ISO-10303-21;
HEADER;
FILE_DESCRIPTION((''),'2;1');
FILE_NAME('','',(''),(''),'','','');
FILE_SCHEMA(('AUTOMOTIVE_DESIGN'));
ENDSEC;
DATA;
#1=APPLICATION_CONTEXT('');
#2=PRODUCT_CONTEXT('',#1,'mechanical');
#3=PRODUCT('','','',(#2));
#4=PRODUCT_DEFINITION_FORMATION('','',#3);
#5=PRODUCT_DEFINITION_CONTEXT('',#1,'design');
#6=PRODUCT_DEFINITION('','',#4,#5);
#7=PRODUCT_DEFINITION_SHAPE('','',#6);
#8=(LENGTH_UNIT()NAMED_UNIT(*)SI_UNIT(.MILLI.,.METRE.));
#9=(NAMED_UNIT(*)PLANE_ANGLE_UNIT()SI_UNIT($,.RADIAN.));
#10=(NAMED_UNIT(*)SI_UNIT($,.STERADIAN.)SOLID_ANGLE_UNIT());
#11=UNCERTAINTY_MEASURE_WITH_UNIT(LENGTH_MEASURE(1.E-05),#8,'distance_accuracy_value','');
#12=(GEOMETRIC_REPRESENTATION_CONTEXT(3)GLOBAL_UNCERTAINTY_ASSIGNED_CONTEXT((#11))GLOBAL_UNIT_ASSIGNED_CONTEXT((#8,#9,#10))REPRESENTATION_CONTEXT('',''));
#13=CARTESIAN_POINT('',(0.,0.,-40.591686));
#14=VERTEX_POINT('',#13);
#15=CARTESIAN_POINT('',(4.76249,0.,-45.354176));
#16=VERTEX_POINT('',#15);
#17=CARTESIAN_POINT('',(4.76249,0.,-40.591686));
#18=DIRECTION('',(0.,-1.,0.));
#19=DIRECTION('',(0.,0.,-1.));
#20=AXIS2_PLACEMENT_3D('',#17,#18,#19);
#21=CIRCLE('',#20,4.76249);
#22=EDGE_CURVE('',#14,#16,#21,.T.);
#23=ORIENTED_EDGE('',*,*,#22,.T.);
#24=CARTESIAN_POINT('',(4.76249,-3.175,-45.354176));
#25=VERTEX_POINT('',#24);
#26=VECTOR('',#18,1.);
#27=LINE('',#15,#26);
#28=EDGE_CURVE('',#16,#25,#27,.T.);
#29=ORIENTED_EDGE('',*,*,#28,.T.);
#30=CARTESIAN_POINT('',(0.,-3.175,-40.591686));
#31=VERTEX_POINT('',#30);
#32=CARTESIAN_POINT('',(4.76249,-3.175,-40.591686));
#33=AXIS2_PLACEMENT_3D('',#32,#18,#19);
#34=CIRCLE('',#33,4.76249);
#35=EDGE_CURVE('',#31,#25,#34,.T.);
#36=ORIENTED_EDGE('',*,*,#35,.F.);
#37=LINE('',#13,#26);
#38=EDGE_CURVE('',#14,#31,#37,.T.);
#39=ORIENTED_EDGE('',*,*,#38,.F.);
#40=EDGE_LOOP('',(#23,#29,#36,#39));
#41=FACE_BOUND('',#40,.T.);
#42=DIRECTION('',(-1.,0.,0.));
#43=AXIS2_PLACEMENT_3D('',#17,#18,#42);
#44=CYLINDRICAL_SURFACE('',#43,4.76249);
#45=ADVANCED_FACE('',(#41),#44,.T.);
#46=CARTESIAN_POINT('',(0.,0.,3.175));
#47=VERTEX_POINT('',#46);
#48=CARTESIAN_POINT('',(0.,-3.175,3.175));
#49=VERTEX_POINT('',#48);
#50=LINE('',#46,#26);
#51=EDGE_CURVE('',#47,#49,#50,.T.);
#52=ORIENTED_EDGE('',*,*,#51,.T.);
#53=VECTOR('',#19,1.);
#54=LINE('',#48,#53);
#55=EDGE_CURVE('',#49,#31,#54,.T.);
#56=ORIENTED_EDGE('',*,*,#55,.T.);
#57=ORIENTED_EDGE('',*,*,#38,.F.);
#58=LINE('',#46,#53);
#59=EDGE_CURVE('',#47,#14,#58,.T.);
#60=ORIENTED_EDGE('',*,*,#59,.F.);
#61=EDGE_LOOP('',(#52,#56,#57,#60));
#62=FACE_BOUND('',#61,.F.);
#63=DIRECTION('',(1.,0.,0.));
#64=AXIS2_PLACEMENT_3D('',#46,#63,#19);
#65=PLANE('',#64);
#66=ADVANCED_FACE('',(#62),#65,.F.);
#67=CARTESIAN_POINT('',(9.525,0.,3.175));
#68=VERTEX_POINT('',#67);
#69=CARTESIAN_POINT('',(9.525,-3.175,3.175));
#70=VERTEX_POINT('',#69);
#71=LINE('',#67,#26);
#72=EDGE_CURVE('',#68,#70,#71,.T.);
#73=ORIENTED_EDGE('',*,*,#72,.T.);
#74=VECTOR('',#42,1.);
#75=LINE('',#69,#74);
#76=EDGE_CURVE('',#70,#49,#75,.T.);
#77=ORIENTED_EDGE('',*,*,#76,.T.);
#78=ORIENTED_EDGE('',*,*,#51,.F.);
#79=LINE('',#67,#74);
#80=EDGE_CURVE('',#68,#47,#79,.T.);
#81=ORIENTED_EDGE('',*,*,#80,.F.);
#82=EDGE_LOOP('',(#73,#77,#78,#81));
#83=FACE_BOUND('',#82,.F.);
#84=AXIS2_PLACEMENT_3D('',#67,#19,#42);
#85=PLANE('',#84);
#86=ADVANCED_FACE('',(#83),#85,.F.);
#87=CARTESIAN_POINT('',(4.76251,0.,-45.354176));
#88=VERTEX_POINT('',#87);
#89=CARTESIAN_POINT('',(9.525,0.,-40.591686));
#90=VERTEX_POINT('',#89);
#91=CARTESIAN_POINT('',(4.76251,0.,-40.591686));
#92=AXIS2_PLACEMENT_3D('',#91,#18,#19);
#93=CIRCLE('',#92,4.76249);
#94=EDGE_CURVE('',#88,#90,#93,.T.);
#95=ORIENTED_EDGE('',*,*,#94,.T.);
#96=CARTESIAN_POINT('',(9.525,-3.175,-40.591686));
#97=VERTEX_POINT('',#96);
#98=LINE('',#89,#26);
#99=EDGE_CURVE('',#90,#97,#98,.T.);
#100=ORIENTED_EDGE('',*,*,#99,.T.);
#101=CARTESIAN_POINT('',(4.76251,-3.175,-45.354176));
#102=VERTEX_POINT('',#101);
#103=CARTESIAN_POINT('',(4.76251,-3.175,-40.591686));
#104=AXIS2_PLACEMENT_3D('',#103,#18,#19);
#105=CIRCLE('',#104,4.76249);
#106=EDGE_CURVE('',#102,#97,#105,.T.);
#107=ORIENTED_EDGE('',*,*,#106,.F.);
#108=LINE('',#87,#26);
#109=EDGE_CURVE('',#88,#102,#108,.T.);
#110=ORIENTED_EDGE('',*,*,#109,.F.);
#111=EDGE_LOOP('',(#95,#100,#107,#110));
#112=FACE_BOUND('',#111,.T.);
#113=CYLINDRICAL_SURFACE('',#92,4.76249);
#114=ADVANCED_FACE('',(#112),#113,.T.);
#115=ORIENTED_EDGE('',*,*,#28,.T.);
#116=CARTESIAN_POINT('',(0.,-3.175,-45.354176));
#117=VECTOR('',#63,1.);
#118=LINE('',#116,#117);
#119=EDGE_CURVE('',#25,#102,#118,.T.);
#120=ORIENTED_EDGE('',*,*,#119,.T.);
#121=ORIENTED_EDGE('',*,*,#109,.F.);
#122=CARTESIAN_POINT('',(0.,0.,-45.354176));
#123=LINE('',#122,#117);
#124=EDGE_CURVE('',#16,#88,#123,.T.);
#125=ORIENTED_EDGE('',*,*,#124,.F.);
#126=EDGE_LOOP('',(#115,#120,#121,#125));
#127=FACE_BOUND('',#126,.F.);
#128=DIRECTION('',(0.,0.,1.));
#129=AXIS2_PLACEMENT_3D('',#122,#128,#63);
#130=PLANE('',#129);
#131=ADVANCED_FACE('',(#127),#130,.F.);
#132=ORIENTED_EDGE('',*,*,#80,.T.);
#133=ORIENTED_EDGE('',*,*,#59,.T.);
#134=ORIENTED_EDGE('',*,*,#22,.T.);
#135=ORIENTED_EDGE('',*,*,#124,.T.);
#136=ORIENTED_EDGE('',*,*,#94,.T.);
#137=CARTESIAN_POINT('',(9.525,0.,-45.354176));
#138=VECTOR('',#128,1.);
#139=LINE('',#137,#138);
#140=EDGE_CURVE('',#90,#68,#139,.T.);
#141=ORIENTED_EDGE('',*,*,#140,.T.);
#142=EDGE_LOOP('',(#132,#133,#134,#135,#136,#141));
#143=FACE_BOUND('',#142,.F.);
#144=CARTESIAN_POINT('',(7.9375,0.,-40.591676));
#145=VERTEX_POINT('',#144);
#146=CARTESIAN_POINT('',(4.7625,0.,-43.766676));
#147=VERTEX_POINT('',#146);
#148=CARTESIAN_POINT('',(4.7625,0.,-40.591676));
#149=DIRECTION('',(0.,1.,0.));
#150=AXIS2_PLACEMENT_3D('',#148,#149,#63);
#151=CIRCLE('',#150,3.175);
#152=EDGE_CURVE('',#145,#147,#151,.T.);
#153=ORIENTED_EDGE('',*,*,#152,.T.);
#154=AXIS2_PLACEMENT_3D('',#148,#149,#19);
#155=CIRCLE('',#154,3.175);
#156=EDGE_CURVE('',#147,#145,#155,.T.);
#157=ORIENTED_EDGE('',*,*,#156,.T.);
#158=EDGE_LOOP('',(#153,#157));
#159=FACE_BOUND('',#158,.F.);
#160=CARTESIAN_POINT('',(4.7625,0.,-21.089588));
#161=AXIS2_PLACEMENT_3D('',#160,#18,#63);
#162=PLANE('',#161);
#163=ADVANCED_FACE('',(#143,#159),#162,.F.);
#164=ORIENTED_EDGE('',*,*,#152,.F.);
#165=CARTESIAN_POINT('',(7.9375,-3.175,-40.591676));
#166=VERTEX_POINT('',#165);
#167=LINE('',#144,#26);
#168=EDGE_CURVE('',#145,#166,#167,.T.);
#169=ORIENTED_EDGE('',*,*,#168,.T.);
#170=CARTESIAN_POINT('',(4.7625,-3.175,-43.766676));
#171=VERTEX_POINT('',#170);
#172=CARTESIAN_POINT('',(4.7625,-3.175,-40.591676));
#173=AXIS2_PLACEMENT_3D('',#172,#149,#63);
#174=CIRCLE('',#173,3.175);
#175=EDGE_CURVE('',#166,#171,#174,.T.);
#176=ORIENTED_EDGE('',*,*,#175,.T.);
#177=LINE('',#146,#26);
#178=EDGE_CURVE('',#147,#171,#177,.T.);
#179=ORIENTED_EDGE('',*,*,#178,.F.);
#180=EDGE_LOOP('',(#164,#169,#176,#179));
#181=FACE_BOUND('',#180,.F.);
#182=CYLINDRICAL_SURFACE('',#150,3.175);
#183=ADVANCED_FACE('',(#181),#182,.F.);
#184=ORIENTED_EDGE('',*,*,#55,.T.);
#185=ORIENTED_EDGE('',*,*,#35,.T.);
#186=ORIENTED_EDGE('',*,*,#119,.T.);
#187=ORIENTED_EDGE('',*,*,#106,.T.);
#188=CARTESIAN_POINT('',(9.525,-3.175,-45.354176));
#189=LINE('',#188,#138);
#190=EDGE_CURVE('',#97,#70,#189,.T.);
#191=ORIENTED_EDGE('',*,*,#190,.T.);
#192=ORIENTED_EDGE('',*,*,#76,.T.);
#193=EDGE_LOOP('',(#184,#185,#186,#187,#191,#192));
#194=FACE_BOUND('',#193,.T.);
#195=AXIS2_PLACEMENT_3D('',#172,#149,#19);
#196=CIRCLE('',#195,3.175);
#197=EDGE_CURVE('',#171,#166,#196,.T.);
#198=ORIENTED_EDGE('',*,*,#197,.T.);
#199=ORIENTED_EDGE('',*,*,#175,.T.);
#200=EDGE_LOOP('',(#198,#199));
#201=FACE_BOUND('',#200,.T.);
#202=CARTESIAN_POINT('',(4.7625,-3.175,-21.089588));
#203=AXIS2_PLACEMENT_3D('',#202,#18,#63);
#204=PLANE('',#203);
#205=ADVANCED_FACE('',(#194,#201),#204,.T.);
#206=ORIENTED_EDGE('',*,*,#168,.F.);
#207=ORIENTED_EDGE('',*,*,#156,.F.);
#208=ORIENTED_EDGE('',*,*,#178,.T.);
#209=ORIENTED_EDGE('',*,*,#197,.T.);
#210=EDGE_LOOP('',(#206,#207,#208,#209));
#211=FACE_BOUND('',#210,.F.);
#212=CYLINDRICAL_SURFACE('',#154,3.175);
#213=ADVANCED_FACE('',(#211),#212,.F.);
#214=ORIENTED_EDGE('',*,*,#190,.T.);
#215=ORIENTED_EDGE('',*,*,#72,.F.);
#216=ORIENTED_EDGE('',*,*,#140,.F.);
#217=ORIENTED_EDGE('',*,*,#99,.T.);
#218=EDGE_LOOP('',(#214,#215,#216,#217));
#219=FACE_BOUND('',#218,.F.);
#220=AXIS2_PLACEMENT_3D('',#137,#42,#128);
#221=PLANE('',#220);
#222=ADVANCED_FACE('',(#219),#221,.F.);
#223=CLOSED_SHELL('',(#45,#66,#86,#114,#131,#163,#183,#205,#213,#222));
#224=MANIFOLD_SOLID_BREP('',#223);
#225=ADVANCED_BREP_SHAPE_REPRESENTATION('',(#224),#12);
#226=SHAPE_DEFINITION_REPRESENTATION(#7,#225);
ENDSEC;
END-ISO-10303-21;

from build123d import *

# Parameters (mm, degrees)
F1_DEPTH = 3.175
F2_R     = 4.76249


# Not quite as in the source:
# - a fillet or chamfer is up to 0.001 mm smaller than in the source, because OpenCascade refuses the exact size


with BuildPart() as f1:
    # F0 (on Front) → F1 (new body)
    with BuildSketch(Plane.XZ):
        Polygon((0, 3.175), (0, 0), (0, -45.3541763127), (4.7625, -45.3541763127), (9.525, -45.3541763127), (9.525, 3.175), align=None)
        with BuildLine():
            ThreePointArc((7.9375, -40.5916763127), (7.0075640303, -42.836740343), (4.7625, -43.7666763127))
            ThreePointArc((4.7625, -43.7666763127), (2.5174359697, -38.3466122824), (7.9375, -40.5916763127))
        make_face(mode=Mode.SUBTRACT)
    extrude(amount=F1_DEPTH)

    # F2 (radius 4.7625 in the source; OpenCascade refuses exactly that, so slightly less here)
    f2_edges = [f1.edges().sort_by_distance(p)[0] for p in [
        (0, -1.5875, -45.354176),
        (9.525, -1.5875, -45.354176),
    ]]
    fillet(f2_edges, radius=F2_R)


solid = f1.part
